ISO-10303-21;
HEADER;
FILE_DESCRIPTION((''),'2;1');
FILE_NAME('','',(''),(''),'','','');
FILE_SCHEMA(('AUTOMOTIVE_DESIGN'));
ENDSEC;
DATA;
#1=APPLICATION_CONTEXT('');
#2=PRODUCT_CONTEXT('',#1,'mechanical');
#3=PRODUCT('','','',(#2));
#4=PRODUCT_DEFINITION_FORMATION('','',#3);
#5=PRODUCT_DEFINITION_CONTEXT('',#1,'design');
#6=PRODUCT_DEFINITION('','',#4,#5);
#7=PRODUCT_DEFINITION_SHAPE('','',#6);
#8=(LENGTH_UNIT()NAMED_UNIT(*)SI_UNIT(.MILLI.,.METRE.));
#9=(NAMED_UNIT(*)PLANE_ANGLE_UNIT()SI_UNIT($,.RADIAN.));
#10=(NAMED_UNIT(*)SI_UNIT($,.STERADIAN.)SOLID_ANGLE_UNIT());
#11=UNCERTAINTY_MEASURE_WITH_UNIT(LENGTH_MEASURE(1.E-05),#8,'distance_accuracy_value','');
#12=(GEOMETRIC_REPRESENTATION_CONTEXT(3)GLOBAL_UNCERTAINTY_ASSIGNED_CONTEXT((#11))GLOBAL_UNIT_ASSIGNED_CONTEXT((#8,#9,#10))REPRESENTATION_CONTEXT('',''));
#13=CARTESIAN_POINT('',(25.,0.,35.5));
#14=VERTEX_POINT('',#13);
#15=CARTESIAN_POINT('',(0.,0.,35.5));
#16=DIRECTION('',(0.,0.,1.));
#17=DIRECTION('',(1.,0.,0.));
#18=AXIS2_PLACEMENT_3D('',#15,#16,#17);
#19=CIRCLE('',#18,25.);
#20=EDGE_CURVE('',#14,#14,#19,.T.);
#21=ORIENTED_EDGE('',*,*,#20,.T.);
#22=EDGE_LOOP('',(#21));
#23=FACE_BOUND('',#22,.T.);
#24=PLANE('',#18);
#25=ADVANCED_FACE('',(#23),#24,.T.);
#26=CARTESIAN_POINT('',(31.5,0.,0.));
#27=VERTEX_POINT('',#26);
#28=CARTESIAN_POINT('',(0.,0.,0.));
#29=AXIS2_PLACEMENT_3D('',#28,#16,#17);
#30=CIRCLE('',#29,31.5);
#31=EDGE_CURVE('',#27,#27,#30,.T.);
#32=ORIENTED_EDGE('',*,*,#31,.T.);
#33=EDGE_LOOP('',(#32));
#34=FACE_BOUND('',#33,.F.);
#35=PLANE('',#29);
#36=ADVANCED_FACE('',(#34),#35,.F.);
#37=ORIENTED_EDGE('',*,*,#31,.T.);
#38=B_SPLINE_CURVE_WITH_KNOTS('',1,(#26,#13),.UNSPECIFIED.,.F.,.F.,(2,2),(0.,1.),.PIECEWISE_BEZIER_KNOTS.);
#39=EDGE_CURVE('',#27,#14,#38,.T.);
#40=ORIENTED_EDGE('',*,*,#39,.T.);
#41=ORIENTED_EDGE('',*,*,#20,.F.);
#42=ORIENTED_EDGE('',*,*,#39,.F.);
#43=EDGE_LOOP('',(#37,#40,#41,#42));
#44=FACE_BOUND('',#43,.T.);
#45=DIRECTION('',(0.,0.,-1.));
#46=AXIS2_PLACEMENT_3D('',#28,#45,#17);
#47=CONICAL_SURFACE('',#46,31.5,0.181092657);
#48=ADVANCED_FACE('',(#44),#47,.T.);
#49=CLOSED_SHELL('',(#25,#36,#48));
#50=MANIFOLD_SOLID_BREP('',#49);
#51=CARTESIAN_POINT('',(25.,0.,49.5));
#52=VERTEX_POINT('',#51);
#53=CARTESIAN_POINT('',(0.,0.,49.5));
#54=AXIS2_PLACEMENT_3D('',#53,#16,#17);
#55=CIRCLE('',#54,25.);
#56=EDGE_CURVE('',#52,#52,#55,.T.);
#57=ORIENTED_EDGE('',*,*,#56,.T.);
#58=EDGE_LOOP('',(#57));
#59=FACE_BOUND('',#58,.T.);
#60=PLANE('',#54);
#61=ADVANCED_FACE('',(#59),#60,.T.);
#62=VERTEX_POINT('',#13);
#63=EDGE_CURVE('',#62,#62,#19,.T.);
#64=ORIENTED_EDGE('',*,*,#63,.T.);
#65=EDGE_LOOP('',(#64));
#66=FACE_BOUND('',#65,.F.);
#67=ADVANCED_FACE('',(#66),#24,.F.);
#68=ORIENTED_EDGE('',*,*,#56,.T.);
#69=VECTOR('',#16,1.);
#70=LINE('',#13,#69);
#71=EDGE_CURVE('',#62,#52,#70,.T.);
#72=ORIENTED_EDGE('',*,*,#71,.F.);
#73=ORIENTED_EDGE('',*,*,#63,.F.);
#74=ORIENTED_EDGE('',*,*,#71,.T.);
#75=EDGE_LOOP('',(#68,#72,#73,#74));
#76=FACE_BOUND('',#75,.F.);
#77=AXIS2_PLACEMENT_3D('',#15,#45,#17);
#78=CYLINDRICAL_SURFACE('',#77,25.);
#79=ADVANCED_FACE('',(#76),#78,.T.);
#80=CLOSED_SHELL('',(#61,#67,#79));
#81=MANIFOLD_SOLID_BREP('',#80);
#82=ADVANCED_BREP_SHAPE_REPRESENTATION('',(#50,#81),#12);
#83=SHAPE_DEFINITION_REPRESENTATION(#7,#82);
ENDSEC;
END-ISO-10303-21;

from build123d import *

# Parameters (mm, degrees)
F0_R     = 31.5
F2_R     = 25
F4_DEPTH = 14


with BuildPart() as f3:
    # F0 (on Top) → F3 section 0
    with BuildSketch(Plane.XY):
        Circle(F0_R)
    # F2 (on offset) → F3 section 1
    with BuildSketch(Plane.XY.offset(35.5)):
        Circle(F2_R)
    loft()


with BuildPart() as f4:
    # F4 (new): a face of the model
    f4_faces = [f3.part.faces().sort_by_distance(p)[0] for p in [
        (0, 0, 35.5),
    ]]
    extrude(f4_faces, amount=F4_DEPTH)


solid = Compound([f3.part, f4.part])
